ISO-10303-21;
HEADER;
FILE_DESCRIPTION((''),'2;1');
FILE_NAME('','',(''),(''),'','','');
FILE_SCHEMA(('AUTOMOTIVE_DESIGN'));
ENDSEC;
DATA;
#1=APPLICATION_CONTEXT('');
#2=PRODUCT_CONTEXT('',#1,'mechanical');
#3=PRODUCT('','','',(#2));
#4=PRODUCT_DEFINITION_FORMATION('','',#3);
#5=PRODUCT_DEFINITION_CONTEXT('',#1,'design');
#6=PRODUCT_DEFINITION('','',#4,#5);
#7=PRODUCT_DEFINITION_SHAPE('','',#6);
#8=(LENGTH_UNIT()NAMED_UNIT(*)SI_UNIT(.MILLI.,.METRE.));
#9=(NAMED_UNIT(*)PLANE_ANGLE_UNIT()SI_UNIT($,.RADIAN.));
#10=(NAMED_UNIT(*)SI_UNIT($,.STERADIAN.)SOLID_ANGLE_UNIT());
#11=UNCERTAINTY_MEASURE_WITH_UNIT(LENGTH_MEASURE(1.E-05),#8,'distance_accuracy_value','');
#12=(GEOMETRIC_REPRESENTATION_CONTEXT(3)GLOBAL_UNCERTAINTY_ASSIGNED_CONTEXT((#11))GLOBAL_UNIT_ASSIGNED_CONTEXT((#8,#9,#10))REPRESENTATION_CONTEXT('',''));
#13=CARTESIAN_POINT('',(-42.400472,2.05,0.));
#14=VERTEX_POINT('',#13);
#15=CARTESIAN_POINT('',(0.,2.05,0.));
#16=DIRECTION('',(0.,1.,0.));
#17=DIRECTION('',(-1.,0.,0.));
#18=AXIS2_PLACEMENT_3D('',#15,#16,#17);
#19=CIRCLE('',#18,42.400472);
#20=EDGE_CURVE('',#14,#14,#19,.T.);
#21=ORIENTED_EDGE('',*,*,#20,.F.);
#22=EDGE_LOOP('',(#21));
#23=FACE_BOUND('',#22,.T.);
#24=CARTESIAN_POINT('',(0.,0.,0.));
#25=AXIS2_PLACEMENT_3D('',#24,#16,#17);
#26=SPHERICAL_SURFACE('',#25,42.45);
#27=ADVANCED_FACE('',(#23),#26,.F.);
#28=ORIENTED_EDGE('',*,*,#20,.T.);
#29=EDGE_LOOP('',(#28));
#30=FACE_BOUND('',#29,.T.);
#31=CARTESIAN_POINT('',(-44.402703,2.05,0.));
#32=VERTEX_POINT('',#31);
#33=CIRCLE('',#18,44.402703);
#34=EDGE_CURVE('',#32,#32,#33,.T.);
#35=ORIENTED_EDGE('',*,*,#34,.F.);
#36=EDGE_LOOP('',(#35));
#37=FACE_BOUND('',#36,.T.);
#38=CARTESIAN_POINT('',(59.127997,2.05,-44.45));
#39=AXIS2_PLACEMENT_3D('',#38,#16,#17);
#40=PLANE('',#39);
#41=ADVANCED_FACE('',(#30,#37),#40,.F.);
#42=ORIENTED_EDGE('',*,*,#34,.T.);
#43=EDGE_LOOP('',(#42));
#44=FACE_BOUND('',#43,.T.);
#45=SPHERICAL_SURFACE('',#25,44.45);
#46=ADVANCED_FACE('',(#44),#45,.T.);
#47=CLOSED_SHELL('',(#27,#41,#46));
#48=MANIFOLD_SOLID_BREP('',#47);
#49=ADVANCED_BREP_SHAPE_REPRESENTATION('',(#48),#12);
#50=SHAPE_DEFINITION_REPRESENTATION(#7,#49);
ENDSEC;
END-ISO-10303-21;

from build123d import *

# Parameters (mm, degrees)
CUT_EXTRUDE1_DEPTH      = 77.989658397
CUT_EXTRUDE1_DEPTH_BACK = 77.989658397
SKETCH2_W               = 118.25599312
SKETCH2_H               = 2.05


# Read off the part's stored shape, not the designer's step: Revolve1
with BuildPart() as part:
    # Revolve1 outline → Revolve1 (revolve)
    with BuildSketch(Plane.XY):
        with BuildLine():
            ThreePointArc((0, 42.45), (30.016682876, 30.016682846), (42.45, -4.2e-08))
            Line((42.45, -4.2e-08), (44.45, -3.3e-08))
            ThreePointArc((44.45, -3.3e-08), (31.430896435, 31.430896412), (0, 44.45))
            Line((0, 44.45), (0, 42.45))
        make_face()
    revolve(axis=Axis((0, 0, 0), (0, 1, 0)))

    # Sketch2 → Cut-Extrude1 (cut, two sides: drawn at the far end of the back side and taken through both)
    with BuildSketch(Plane.XY.offset(-CUT_EXTRUDE1_DEPTH_BACK)):
        with Locations((0, 1.025)):
            Rectangle(SKETCH2_W, SKETCH2_H)
    extrude(amount=CUT_EXTRUDE1_DEPTH + CUT_EXTRUDE1_DEPTH_BACK, mode=Mode.SUBTRACT)


solid = part.part
